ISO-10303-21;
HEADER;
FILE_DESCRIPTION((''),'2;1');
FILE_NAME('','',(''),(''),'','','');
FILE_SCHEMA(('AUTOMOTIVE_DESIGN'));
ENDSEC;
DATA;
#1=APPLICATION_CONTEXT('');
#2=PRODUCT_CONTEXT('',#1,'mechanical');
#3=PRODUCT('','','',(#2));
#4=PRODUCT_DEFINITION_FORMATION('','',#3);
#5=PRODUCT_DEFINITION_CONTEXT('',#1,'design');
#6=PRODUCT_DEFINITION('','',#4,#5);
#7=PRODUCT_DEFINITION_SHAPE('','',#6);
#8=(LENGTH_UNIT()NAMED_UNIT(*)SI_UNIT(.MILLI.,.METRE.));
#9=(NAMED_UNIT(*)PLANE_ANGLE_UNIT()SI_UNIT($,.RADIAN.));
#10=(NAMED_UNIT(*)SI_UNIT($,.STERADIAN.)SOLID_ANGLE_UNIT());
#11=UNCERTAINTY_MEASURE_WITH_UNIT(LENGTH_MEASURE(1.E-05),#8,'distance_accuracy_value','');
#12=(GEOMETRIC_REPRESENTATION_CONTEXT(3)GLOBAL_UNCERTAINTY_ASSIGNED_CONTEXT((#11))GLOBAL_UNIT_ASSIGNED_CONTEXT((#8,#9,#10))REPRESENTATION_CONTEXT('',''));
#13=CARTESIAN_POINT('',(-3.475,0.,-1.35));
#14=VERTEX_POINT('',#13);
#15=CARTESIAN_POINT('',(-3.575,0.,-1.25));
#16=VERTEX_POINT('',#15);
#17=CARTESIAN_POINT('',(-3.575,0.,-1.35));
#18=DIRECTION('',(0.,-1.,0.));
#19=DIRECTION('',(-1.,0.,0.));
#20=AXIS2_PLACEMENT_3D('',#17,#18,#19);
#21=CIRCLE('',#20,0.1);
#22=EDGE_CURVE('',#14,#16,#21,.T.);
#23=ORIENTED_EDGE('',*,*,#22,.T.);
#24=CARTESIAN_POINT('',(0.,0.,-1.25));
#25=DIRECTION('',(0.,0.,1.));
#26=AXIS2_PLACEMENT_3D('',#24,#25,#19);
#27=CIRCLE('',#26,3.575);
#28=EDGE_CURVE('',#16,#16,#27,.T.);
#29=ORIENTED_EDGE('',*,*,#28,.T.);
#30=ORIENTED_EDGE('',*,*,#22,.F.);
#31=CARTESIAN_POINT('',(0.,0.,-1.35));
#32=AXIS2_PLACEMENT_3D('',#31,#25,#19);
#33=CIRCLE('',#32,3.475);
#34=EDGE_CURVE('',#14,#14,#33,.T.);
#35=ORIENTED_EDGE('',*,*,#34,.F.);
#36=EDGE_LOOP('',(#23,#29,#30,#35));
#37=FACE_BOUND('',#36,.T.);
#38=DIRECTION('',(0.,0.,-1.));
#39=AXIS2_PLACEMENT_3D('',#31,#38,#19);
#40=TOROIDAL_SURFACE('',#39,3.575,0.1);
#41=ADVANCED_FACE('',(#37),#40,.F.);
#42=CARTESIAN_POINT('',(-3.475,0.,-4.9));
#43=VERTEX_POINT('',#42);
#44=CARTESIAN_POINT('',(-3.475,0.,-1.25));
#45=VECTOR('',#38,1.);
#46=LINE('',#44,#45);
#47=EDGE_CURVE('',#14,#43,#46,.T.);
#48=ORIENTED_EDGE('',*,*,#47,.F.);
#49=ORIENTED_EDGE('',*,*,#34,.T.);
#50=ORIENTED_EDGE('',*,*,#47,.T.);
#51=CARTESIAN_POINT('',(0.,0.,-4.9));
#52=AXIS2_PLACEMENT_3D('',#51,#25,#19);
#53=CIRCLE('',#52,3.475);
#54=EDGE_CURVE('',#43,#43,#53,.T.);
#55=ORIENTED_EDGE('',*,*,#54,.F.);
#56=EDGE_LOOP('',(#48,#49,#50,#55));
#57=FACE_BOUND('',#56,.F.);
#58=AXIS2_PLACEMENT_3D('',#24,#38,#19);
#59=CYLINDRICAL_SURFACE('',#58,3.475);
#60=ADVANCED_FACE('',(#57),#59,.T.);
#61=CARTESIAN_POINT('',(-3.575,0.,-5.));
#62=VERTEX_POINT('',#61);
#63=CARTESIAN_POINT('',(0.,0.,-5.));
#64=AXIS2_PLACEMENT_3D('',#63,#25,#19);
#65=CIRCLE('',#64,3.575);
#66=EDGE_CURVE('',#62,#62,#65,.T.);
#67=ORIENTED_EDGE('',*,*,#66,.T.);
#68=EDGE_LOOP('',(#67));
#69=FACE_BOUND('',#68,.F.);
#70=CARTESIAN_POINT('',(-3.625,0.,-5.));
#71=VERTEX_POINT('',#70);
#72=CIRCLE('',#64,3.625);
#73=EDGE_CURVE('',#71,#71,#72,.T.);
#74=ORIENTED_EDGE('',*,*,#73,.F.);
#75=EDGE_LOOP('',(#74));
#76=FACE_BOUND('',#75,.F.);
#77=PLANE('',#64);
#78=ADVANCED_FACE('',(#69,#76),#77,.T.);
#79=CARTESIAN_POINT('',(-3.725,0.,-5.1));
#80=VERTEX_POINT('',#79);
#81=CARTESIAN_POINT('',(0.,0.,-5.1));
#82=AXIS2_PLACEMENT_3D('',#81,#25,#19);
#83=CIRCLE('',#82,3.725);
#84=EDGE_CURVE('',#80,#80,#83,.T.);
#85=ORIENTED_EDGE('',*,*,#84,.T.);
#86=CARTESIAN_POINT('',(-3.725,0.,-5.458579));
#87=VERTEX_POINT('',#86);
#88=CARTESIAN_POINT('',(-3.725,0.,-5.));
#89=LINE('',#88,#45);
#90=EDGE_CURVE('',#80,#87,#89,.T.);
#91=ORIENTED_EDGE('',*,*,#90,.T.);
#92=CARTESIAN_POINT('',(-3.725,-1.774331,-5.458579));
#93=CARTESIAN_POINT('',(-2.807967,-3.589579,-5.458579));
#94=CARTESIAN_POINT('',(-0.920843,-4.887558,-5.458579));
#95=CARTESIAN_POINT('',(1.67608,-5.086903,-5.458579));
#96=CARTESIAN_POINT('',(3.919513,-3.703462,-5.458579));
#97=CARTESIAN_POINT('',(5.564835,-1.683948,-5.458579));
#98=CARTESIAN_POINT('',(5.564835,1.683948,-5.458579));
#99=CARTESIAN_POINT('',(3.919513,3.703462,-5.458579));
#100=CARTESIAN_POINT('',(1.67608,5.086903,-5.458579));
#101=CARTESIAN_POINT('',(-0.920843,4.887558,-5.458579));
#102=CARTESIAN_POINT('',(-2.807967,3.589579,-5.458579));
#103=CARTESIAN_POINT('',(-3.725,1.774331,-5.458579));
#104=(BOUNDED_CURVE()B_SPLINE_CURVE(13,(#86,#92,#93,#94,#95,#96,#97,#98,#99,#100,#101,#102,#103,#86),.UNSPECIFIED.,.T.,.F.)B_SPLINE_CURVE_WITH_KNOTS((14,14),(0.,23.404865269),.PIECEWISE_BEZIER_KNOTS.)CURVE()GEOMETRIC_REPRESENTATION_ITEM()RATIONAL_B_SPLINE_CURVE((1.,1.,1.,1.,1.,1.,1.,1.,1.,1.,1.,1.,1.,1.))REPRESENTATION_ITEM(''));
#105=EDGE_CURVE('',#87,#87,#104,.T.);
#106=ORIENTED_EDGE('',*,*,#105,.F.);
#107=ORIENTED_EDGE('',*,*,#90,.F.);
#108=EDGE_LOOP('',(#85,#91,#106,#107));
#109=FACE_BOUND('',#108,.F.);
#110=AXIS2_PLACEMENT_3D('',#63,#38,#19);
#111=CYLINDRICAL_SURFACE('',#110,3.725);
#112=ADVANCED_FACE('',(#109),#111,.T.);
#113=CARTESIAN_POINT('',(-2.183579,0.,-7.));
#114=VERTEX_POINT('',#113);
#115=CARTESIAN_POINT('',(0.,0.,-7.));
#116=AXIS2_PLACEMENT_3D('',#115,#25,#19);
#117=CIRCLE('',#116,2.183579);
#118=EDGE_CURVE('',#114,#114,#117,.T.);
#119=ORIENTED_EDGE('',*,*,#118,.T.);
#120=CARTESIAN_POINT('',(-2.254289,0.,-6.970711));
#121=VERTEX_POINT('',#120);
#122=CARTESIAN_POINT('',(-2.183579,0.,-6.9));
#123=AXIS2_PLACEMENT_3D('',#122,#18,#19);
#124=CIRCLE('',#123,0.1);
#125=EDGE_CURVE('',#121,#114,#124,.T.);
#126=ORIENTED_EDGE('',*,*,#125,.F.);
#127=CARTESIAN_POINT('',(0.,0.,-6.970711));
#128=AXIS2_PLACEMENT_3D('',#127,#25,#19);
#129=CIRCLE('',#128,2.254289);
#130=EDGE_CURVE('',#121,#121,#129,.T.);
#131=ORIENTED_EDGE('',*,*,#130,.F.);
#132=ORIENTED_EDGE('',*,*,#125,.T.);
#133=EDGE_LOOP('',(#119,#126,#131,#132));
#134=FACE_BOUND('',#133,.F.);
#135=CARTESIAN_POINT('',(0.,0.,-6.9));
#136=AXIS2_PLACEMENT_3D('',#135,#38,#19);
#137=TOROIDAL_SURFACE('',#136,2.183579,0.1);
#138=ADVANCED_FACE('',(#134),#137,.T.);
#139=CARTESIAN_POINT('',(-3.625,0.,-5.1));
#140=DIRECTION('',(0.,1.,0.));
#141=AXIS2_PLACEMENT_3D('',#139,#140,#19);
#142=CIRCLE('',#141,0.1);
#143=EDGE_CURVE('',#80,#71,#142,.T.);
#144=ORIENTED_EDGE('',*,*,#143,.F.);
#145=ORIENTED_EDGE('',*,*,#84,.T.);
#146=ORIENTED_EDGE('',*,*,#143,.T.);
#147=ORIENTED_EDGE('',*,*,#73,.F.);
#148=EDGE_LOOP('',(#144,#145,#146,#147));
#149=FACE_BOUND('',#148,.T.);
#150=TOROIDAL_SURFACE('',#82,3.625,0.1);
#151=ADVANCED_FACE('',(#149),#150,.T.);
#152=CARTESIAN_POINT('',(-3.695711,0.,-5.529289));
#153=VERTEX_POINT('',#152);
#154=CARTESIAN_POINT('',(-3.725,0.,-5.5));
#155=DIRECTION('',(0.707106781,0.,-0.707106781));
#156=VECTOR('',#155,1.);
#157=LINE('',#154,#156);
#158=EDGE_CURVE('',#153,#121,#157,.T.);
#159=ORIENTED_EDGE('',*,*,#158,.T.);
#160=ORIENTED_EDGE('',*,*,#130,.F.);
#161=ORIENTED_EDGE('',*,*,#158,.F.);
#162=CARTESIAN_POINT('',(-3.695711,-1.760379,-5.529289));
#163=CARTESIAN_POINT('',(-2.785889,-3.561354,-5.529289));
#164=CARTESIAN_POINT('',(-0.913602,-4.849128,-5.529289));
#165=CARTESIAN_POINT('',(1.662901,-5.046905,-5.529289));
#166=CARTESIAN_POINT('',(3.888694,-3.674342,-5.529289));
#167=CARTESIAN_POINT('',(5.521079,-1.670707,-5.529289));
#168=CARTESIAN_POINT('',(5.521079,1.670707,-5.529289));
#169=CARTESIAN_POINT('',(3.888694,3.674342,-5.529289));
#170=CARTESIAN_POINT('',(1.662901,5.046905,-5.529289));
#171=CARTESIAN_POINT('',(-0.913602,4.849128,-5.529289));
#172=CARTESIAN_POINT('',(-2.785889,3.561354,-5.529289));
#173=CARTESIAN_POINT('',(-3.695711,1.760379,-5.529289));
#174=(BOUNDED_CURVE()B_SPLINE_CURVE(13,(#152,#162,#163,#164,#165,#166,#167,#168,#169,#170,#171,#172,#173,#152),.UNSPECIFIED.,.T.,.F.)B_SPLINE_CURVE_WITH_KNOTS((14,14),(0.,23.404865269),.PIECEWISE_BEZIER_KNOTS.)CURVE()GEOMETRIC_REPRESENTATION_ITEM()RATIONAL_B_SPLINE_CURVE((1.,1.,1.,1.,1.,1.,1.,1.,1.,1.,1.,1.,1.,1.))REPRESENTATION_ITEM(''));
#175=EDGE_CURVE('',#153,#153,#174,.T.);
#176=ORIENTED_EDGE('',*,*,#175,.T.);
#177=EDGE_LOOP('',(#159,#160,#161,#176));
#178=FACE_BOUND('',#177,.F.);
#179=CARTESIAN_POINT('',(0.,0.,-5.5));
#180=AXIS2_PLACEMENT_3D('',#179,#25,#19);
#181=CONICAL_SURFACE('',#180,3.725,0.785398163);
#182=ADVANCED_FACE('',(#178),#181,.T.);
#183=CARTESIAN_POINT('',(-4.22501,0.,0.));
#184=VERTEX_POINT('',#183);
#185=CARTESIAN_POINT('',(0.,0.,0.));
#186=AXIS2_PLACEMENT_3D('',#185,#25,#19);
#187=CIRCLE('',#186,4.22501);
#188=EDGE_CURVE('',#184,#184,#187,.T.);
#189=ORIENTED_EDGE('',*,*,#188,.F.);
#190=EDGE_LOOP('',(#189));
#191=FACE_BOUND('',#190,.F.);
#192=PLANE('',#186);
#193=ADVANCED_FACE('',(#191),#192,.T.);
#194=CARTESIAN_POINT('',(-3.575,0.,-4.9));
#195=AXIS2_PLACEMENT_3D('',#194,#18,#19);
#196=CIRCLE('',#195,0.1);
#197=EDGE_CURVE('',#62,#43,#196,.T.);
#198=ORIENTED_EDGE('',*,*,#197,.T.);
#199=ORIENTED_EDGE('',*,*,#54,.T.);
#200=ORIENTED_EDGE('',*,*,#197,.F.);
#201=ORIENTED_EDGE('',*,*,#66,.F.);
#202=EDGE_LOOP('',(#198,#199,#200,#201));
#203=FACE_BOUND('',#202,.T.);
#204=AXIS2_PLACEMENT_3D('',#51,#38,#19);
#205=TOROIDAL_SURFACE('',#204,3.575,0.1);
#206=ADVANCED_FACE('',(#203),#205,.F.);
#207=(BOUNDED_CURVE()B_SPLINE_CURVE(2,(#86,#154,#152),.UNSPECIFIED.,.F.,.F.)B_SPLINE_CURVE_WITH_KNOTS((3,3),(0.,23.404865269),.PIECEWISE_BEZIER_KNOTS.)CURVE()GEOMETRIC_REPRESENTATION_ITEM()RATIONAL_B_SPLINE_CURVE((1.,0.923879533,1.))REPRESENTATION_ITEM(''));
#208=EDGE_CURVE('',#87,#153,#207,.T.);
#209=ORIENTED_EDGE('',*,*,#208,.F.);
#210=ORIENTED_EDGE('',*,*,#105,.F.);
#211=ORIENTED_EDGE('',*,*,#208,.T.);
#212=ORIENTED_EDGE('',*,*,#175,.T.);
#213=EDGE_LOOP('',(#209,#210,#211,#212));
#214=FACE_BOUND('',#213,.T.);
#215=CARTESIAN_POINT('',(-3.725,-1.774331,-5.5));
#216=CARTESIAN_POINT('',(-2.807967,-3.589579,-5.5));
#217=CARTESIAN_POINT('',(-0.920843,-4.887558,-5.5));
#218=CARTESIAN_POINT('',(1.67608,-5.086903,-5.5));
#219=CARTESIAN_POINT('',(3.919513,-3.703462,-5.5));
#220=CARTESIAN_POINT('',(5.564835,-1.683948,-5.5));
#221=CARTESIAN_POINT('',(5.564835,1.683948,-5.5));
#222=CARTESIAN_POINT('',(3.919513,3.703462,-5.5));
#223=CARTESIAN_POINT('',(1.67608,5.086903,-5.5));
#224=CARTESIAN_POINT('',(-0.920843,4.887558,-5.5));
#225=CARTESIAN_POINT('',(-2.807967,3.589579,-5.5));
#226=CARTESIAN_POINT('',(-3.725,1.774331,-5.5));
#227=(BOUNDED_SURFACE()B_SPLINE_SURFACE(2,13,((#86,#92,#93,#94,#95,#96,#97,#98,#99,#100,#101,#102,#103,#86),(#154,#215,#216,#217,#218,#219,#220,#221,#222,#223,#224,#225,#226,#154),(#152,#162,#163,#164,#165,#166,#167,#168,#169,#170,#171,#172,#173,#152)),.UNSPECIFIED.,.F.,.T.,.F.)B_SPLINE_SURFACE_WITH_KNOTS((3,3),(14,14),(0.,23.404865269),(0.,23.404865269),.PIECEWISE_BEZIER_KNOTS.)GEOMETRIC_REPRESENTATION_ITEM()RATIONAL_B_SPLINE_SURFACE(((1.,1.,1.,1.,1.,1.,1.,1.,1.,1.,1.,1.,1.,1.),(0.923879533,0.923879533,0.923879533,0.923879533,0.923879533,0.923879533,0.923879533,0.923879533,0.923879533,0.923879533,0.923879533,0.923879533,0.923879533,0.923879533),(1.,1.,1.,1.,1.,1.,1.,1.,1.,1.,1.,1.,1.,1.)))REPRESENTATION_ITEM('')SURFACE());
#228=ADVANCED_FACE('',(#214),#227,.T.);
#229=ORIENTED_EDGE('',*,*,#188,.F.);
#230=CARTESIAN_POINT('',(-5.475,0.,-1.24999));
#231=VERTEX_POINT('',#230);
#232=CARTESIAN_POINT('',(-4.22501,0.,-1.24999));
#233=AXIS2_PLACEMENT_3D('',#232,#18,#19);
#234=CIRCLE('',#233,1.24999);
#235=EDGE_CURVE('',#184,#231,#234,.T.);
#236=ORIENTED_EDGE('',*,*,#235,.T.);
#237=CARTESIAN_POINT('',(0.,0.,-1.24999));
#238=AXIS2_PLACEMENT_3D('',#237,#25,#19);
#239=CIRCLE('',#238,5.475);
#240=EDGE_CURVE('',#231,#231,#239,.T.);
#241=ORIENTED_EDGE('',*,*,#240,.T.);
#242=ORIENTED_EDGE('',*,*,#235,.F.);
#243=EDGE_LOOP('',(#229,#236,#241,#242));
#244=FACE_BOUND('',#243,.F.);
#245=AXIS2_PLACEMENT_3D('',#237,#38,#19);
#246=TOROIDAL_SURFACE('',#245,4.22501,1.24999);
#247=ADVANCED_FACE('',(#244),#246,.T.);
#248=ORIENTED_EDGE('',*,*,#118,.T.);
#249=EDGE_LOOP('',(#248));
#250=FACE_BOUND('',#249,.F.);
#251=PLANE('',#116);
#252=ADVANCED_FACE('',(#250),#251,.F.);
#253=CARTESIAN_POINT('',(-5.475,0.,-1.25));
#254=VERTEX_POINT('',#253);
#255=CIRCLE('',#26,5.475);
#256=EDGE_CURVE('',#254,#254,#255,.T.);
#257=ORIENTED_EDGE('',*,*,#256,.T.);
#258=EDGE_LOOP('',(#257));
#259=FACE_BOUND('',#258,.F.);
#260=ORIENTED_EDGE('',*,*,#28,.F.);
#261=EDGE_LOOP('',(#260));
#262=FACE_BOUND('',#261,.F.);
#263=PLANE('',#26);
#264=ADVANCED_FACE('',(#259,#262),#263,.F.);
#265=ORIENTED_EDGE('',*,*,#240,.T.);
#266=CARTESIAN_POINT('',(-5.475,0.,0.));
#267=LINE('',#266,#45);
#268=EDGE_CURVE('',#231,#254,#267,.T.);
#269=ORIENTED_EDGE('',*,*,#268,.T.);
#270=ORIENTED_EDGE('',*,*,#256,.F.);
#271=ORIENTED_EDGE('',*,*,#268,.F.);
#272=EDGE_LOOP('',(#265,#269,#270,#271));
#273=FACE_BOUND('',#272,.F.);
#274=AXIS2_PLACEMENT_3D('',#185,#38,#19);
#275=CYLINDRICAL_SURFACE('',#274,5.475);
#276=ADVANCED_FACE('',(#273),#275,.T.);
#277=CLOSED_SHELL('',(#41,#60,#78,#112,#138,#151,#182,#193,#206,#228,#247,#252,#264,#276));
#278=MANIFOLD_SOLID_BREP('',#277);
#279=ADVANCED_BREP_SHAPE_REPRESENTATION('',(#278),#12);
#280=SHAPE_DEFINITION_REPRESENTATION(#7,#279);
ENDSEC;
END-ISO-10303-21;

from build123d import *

# Parameters (mm, degrees)
F2_R    = 1.24999
F3_SIZE = 1.5
F4_R    = 0.1


# Not quite as in the source:
# - a fillet or chamfer is up to 0.001 mm smaller than in the source, because OpenCascade refuses the exact size


with BuildPart() as f1:
    # F0 (on Front) → F1 (revolve)
    with BuildSketch(Plane.XZ):
        Polygon((0, -7), (0, 0), (-5.475, 0), (-5.475, -1.25), (-3.475, -1.25), (-3.475, -5), (-3.725, -5), (-3.725, -7), align=None)
    revolve(axis=Axis((0, 0, -3.5), (0, 0, 1)))

    # F2 (radius 1.25 in the source; OpenCascade refuses exactly that, so slightly less here)
    f2_edges = [f1.edges().sort_by_distance(p)[0] for p in [
        (5.475, 0, 0),
    ]]
    fillet(f2_edges, radius=F2_R)

    # F3
    f3_edges = [f1.edges().sort_by_distance(p)[0] for p in [
        (3.725, 0, -7),
    ]]
    chamfer(f3_edges, length=F3_SIZE)

    # F4
    f4_edges = [f1.edges().sort_by_distance(p)[0] for p in [
        (3.725, 0, -5),
        (2.225, 0, -7),
        (3.475, 0, -5),
        (3.475, 0, -1.25),
        (3.725, 0, -5.5),
    ]]
    fillet(f4_edges, radius=F4_R)


solid = f1.part
